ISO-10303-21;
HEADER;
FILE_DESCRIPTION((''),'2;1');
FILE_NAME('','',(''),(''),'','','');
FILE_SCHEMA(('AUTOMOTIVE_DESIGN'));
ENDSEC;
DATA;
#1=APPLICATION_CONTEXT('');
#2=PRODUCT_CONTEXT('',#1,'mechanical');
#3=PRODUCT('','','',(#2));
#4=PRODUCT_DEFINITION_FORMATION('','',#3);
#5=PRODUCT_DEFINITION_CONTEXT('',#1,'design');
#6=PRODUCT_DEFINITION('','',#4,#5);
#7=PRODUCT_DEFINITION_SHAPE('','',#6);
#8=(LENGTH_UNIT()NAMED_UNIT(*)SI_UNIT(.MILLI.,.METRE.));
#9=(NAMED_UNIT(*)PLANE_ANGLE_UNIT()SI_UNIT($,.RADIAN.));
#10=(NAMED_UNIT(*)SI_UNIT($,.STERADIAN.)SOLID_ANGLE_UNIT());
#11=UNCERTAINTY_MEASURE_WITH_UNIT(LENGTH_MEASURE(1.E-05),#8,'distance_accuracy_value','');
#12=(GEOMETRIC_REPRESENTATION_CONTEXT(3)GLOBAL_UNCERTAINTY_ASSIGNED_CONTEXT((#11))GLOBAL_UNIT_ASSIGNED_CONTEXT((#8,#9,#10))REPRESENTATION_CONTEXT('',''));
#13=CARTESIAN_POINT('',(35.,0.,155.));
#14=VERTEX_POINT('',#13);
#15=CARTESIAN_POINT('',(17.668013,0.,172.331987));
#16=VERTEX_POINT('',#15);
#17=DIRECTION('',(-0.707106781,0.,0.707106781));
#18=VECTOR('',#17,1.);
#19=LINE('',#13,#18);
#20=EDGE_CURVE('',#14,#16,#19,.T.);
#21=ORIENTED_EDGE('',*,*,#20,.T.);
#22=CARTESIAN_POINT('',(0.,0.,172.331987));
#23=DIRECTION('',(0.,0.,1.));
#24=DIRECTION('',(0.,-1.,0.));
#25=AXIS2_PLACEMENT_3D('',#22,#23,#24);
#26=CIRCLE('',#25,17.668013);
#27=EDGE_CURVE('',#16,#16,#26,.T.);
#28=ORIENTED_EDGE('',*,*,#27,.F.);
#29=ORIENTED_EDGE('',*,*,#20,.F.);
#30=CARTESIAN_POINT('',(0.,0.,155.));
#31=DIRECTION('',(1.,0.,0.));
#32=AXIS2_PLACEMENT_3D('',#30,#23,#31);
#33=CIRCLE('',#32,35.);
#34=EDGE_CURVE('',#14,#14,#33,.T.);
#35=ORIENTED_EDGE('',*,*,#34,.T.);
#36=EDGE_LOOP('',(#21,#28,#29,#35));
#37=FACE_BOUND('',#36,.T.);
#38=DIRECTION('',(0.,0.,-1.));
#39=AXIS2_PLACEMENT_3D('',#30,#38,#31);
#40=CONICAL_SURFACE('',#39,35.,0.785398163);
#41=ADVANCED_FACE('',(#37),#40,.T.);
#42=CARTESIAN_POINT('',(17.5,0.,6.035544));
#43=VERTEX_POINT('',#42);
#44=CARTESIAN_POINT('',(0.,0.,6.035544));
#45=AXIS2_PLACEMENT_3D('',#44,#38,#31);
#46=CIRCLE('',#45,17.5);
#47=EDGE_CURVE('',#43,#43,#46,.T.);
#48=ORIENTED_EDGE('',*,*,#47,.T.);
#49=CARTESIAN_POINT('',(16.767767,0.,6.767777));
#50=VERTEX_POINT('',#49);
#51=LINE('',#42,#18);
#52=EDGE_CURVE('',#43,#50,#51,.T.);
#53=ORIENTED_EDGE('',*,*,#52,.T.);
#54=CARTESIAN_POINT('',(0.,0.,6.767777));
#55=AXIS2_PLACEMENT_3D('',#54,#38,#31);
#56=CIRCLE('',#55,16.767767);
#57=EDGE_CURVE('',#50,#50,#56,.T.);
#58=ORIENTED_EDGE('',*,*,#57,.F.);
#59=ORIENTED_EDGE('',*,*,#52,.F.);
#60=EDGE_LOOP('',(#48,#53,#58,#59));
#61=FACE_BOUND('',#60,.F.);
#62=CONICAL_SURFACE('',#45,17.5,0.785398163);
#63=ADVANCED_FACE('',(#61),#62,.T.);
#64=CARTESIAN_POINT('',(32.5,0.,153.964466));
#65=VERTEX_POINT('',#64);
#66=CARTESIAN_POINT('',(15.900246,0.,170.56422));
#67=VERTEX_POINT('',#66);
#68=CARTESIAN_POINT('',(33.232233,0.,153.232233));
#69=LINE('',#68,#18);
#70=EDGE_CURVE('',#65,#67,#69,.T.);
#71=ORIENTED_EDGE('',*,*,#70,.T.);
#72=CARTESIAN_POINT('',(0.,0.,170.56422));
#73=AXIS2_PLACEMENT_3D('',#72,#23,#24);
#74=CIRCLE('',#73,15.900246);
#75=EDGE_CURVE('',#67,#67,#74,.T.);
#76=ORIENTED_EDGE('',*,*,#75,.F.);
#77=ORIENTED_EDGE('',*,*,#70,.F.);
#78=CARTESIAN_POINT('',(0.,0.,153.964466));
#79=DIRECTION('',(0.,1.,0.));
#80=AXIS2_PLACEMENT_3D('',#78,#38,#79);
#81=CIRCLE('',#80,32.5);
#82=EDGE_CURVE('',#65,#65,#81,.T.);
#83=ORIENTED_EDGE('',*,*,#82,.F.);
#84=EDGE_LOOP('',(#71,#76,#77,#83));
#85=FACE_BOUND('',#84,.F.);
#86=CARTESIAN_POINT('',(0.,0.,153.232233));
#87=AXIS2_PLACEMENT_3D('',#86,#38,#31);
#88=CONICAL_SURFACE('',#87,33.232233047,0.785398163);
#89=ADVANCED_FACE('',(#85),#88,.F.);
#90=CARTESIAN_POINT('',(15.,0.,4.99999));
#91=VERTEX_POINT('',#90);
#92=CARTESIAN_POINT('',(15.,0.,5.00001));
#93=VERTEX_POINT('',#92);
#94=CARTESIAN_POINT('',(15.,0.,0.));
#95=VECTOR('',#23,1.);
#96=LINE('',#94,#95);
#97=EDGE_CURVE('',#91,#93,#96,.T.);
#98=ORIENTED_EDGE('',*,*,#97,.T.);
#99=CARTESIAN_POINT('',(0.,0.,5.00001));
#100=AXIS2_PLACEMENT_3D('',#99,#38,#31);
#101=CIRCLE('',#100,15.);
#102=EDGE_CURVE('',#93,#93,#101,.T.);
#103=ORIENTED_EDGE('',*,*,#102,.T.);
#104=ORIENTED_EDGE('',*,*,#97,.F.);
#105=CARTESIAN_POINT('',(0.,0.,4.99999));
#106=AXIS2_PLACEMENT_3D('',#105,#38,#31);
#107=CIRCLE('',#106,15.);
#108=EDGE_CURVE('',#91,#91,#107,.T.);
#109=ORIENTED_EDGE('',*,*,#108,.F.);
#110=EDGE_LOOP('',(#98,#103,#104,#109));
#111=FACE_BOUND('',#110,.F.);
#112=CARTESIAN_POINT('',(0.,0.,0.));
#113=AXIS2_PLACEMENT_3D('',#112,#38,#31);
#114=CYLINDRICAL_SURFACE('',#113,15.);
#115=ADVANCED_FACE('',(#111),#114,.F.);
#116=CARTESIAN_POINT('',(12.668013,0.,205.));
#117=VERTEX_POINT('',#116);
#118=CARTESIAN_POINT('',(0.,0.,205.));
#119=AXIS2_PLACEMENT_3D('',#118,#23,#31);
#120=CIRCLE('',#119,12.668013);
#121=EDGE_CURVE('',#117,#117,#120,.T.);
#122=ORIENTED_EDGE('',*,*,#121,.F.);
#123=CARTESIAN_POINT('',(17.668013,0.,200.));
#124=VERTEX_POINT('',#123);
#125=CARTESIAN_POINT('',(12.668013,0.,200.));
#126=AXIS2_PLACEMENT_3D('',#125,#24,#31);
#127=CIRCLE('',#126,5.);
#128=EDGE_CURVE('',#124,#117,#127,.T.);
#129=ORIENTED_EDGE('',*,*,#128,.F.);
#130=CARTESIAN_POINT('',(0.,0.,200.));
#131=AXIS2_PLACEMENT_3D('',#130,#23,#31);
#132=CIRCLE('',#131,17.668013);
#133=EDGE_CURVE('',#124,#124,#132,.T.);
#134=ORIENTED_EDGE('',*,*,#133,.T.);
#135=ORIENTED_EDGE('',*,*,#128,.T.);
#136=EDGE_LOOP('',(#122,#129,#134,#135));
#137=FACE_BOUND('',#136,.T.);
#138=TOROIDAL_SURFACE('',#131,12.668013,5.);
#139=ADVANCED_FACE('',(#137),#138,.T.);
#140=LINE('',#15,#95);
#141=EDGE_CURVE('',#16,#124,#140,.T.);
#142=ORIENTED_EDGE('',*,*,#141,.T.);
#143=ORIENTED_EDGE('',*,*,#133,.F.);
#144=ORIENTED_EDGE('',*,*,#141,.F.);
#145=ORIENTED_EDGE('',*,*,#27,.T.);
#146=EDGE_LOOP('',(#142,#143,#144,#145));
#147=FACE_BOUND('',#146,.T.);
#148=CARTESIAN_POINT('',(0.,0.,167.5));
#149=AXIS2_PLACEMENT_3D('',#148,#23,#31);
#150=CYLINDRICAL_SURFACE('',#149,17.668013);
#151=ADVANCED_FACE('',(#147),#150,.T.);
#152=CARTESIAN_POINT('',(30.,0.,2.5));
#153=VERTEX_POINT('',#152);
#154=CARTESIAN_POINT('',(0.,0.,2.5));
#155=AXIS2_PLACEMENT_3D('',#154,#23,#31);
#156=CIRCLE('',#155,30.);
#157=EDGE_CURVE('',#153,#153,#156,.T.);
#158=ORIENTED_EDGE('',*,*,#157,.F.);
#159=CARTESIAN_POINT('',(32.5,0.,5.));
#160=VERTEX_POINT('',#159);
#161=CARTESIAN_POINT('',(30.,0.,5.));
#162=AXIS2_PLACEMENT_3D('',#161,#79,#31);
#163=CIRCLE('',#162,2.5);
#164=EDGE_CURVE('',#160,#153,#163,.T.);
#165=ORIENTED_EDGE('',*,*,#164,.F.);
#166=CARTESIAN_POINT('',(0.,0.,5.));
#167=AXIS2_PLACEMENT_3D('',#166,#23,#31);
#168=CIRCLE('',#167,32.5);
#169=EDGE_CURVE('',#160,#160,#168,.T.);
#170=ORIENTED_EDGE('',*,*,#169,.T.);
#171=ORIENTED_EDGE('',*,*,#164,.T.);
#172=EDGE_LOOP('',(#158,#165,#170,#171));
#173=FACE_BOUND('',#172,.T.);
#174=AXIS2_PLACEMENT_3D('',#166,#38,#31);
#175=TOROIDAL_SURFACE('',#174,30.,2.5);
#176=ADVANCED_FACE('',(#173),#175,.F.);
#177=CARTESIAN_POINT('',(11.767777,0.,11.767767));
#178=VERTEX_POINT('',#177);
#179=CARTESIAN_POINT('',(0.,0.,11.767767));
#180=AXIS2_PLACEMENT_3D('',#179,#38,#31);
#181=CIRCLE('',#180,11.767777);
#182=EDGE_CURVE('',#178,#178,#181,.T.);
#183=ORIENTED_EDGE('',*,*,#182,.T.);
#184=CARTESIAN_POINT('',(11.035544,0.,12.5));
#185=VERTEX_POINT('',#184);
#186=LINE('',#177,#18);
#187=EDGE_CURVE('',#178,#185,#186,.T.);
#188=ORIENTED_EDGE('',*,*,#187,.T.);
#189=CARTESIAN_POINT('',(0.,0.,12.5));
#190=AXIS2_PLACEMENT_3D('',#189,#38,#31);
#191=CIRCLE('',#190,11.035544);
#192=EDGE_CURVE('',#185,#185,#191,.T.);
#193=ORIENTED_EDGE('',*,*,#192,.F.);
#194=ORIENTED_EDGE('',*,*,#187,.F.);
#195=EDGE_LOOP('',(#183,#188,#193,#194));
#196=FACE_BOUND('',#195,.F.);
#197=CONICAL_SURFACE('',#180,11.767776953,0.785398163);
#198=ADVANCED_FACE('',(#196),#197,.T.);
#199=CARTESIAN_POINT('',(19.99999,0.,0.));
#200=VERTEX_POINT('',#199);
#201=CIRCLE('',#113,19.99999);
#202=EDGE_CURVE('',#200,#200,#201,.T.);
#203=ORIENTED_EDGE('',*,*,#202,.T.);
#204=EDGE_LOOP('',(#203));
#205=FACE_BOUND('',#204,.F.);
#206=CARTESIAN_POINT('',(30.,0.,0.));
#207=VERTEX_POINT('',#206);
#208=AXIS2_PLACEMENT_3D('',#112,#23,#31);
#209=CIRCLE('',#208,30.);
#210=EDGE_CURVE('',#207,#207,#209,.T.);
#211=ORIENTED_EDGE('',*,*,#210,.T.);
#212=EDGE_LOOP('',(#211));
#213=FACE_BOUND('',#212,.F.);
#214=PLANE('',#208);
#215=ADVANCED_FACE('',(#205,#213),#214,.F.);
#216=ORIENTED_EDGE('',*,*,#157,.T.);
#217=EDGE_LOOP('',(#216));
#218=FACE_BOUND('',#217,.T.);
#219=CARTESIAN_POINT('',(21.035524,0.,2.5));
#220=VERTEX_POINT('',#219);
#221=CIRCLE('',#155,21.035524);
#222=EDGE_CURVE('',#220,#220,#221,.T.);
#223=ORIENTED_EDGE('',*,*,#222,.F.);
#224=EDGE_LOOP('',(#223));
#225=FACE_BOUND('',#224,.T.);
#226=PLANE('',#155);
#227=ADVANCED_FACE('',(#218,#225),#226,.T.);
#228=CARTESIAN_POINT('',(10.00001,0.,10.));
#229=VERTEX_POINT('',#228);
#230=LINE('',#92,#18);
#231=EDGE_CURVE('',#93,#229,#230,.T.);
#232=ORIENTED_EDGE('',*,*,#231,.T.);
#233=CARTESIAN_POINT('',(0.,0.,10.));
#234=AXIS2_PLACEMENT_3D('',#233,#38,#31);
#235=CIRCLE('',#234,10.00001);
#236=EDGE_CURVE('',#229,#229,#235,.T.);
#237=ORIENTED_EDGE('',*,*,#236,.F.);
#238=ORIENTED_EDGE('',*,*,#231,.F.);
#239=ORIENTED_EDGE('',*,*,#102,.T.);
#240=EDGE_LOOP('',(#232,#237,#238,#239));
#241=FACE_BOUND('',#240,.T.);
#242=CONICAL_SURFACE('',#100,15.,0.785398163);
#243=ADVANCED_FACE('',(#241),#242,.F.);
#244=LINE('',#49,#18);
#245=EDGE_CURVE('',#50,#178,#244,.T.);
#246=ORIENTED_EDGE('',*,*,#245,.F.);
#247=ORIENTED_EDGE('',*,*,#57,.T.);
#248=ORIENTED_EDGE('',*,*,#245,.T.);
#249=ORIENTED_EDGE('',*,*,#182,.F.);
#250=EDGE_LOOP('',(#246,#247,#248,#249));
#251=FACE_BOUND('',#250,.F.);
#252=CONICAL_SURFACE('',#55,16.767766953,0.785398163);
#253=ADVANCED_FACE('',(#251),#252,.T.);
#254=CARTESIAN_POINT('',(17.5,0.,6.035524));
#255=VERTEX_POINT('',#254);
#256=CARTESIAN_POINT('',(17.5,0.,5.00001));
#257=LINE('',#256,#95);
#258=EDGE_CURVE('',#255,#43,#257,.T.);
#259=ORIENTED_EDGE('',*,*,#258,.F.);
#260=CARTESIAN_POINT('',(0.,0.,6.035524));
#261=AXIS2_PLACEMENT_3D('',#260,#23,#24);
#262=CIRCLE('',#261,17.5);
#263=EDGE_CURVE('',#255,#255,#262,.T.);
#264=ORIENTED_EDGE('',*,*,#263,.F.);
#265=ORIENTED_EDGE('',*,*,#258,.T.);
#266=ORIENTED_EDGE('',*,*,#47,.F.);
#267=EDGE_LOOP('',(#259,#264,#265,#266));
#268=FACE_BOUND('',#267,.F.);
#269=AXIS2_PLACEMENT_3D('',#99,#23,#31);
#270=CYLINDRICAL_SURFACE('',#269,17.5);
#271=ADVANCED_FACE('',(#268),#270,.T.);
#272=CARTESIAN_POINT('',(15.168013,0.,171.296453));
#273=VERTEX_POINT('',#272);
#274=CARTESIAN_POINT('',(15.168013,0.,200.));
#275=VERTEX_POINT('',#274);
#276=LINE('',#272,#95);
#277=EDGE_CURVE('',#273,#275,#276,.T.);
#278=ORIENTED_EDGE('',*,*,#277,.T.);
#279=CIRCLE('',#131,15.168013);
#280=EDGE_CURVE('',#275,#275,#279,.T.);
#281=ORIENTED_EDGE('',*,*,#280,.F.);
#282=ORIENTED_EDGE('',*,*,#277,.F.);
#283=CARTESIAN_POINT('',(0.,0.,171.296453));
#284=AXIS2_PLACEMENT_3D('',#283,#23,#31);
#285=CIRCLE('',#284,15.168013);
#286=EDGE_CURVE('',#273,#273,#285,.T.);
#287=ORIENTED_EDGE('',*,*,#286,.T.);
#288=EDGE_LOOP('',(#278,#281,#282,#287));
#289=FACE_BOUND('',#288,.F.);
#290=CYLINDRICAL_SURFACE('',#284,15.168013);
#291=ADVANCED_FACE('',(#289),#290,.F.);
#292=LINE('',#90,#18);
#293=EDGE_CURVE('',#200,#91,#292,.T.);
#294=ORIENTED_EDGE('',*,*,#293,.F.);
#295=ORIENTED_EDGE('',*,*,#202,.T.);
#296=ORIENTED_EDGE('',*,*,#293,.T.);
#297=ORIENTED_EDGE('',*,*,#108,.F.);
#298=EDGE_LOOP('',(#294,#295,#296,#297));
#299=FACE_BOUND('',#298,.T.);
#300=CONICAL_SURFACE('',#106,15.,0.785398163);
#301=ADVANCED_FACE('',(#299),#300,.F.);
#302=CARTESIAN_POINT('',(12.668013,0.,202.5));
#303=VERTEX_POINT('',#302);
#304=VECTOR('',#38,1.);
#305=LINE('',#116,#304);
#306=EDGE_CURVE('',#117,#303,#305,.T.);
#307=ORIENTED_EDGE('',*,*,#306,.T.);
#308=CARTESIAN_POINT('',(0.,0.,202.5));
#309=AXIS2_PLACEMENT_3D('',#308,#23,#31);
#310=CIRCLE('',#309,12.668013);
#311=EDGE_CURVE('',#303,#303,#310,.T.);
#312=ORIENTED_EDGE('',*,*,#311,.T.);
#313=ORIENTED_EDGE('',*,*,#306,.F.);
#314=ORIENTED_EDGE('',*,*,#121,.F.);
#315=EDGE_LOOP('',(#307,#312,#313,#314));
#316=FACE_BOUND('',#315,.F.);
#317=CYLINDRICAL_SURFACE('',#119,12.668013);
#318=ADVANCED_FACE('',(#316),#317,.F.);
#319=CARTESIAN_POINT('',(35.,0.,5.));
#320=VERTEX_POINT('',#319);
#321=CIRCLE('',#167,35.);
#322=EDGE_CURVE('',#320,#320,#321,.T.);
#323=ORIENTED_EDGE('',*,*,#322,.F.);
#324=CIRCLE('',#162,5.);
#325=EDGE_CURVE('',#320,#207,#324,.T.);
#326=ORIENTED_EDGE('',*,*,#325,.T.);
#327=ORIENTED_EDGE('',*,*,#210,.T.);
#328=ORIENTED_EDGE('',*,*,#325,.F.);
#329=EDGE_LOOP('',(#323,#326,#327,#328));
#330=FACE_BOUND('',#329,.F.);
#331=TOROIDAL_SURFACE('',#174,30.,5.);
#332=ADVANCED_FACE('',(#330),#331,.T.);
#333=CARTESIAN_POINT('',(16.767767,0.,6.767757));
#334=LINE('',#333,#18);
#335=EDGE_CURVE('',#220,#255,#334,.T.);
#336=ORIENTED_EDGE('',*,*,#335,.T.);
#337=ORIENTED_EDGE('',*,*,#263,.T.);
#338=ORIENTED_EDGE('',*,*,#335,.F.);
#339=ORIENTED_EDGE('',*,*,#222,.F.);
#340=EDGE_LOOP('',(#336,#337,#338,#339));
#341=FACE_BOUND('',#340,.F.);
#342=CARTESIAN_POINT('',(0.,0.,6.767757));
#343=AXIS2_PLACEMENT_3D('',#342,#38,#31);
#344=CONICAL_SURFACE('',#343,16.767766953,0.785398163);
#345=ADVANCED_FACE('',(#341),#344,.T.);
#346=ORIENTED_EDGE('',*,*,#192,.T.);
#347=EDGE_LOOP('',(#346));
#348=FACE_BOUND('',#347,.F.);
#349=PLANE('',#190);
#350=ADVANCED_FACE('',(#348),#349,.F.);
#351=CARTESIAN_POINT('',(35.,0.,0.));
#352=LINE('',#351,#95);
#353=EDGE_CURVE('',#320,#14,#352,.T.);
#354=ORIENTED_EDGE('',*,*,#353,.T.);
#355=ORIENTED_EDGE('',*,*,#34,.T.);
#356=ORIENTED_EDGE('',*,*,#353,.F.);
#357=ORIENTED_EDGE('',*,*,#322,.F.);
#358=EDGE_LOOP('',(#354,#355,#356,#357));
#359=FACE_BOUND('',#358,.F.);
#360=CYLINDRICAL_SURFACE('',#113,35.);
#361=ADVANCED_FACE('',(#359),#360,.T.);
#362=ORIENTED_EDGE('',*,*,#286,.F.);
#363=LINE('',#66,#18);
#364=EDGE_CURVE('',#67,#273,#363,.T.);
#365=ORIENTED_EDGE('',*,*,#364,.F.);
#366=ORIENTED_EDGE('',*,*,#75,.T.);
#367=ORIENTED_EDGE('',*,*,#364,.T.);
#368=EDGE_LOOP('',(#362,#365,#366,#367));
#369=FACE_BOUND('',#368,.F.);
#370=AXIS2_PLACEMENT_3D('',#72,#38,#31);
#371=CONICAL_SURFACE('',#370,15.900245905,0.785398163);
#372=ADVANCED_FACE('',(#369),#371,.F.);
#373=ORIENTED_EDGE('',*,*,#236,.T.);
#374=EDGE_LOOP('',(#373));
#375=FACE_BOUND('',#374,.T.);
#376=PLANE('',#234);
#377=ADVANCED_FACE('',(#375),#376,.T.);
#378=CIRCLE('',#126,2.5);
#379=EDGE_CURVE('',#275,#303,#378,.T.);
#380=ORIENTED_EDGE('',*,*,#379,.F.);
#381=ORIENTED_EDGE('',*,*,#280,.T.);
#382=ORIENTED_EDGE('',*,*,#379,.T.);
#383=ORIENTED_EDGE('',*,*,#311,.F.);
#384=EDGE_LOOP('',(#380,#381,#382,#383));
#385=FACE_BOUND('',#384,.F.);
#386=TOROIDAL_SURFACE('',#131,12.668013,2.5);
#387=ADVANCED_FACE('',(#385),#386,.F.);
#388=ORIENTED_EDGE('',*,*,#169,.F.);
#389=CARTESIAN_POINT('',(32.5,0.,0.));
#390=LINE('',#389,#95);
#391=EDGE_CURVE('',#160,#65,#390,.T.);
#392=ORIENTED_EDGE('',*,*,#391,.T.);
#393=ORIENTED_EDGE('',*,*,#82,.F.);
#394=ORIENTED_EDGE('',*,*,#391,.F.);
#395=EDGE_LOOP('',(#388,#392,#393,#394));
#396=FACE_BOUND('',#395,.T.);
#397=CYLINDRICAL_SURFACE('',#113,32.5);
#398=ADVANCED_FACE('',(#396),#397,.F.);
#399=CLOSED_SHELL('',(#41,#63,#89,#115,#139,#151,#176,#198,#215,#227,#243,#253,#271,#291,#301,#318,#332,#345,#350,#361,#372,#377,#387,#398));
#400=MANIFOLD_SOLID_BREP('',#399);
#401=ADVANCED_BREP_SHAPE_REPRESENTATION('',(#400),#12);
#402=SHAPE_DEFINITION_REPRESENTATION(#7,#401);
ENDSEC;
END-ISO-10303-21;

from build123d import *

# Parameters (mm, degrees)
F0_R        = 35
F1_DEPTH    = 180
F2_R        = 15
F3_DEPTH    = 10
F4_SIZE     = 4.99999
F5_R        = 17.6680128579
F6_DEPTH    = 25
F7_R        = 5
F8_R        = 5
F9_S5_R     = 17.6680128579
F9_T6_DEPTH = 53
F10_T       = 2.5


# Not quite as in the source:
# - a fillet or chamfer that OpenCascade refuses, or shapes differently, is made with other operations: its cross-section is extruded or revolved along the edge and cut away or added
# - a fillet or chamfer is up to 0.001 mm smaller than in the source, because OpenCascade refuses the exact size
# - a shell that OpenCascade refuses in one call is made with other operations: the cavity is built on its own and cut out


with BuildPart() as f1:
    # F0 (on Top) → F1 (new body)
    with BuildSketch(Plane.XY):
        Circle(F0_R)
    extrude(amount=F1_DEPTH)

    # F2 (on face) → F3 (cut)
    with BuildSketch(Plane(origin=(0, 0, 0), x_dir=(1, 0, 0), z_dir=(0, 0, -1))):
        Circle(F2_R)
    extrude(amount=-F3_DEPTH, mode=Mode.SUBTRACT)

    # F4 (size 5 in the source; OpenCascade refuses exactly that, so slightly less here)
    f4_edges = [f1.edges().sort_by_distance(p)[0] for p in [
        (-15, 0, 10),
        (-15, 0, 0),
    ]]
    chamfer(f4_edges, length=F4_SIZE)

    # F5 (on face) → F6 (join)
    with BuildSketch(Plane.XY.offset(180)):
        Circle(F5_R)
    extrude(amount=F6_DEPTH)

    # F7
    f7_edges = [f1.edges().sort_by_distance(p)[0] for p in [
        (-17.668013, 0, 205),
    ]]
    fillet(f7_edges, radius=F7_R)

    # F8
    f8_edges = [f1.edges().sort_by_distance(p)[0] for p in [
        (-35, 0, 0),
    ]]
    fillet(f8_edges, radius=F8_R)

    # F9: chamfer of 25 on 1 edges, made by hand


with BuildPart() as f9_tool2:
    # F9_s3 → F9_t4 (revolve)
    with BuildSketch(Plane.XZ):
        Polygon((35, 155), (10, 180), (35, 180), align=None)
    revolve(axis=Axis((0, 0, 180), (0, 0, 1)))

    # F9_s5 → F9_t6 (cut, symmetric)
    with BuildSketch(Plane.XY.offset(167.5)):
        Circle(F9_S5_R)
    extrude(amount=F9_T6_DEPTH, both=True, mode=Mode.SUBTRACT)


with BuildPart() as f1_1:
    add(f1.part)

    # F9_t1: cut F9_tool2
    add(f9_tool2.part, mode=Mode.SUBTRACT)

    # F10: shell of thickness 2.5, made by hand


with BuildPart() as f10_core1:
    # F10_t2: copy of F1
    add(f1_1.part)

    # the walls: a layer under each face that stays
    f10_faces = [f10_core1.faces().sort_by_distance(p)[0] for p in [
        (-35, 0, 80),
        (-26.334006429, 0, 163.665993571),
        (-17.6680128579, 0, 186.165993571),
        (-16.2035467638, 0, 203.5355339059),
        (-33.5355339059, 0, 1.4644660941),
        (-20, -20, 0),
        (-17.499995, 0, 2.499995),
        (-15, 0, 5),
        (-12.500005, 0, 7.500005),
        (0, 0, 10),
    ]]
    thicken(f10_faces, amount=-F10_T, mode=Mode.SUBTRACT)

    # F10_s3 → F10_t4 (revolve, cut)
    with BuildSketch(Plane.XZ):
        Polygon((17.7106905274, 172.3496648116), (15.9002459049, 170.5642201891), (15.1680128579, 171.2964532362), (15.1680128579, 172.3319871421), align=None)
    revolve(axis=Axis((0, 0, 172.3319871421), (0, 0, 1)), mode=Mode.SUBTRACT)

    # F10_s5 → F10_t6 (revolve, cut)
    with BuildSketch(Plane.XZ):
        Polygon((14.9573223305, 4.9823323305), (17.5, 5.00001), (17.5, 6.0355439059), (16.767766953, 6.767776953), align=None)
    revolve(axis=Axis((0, 0, 5.00001), (0, 0, -1)), mode=Mode.SUBTRACT)

    # F10_s7 → F10_t8 (revolve, cut)
    with BuildSketch(Plane.XZ):
        Polygon((9.9823323305, 9.9573223305), (11.767776953, 11.767766953), (11.0355439059, 12.5), (10.00001, 12.5), align=None)
    revolve(axis=Axis((0, 0, 10), (0, 0, -1)), mode=Mode.SUBTRACT)


with BuildPart() as f1_2:
    add(f1_1.part)

    # what is left inside the walls is the cavity
    f10_cavity = [f10_core1.part.solids().sort_by_distance(p)[0] for p in [
        (-32.475, 0, 104.309644),
    ]]
    add(f10_cavity, mode=Mode.SUBTRACT)


solid = f1_2.part
